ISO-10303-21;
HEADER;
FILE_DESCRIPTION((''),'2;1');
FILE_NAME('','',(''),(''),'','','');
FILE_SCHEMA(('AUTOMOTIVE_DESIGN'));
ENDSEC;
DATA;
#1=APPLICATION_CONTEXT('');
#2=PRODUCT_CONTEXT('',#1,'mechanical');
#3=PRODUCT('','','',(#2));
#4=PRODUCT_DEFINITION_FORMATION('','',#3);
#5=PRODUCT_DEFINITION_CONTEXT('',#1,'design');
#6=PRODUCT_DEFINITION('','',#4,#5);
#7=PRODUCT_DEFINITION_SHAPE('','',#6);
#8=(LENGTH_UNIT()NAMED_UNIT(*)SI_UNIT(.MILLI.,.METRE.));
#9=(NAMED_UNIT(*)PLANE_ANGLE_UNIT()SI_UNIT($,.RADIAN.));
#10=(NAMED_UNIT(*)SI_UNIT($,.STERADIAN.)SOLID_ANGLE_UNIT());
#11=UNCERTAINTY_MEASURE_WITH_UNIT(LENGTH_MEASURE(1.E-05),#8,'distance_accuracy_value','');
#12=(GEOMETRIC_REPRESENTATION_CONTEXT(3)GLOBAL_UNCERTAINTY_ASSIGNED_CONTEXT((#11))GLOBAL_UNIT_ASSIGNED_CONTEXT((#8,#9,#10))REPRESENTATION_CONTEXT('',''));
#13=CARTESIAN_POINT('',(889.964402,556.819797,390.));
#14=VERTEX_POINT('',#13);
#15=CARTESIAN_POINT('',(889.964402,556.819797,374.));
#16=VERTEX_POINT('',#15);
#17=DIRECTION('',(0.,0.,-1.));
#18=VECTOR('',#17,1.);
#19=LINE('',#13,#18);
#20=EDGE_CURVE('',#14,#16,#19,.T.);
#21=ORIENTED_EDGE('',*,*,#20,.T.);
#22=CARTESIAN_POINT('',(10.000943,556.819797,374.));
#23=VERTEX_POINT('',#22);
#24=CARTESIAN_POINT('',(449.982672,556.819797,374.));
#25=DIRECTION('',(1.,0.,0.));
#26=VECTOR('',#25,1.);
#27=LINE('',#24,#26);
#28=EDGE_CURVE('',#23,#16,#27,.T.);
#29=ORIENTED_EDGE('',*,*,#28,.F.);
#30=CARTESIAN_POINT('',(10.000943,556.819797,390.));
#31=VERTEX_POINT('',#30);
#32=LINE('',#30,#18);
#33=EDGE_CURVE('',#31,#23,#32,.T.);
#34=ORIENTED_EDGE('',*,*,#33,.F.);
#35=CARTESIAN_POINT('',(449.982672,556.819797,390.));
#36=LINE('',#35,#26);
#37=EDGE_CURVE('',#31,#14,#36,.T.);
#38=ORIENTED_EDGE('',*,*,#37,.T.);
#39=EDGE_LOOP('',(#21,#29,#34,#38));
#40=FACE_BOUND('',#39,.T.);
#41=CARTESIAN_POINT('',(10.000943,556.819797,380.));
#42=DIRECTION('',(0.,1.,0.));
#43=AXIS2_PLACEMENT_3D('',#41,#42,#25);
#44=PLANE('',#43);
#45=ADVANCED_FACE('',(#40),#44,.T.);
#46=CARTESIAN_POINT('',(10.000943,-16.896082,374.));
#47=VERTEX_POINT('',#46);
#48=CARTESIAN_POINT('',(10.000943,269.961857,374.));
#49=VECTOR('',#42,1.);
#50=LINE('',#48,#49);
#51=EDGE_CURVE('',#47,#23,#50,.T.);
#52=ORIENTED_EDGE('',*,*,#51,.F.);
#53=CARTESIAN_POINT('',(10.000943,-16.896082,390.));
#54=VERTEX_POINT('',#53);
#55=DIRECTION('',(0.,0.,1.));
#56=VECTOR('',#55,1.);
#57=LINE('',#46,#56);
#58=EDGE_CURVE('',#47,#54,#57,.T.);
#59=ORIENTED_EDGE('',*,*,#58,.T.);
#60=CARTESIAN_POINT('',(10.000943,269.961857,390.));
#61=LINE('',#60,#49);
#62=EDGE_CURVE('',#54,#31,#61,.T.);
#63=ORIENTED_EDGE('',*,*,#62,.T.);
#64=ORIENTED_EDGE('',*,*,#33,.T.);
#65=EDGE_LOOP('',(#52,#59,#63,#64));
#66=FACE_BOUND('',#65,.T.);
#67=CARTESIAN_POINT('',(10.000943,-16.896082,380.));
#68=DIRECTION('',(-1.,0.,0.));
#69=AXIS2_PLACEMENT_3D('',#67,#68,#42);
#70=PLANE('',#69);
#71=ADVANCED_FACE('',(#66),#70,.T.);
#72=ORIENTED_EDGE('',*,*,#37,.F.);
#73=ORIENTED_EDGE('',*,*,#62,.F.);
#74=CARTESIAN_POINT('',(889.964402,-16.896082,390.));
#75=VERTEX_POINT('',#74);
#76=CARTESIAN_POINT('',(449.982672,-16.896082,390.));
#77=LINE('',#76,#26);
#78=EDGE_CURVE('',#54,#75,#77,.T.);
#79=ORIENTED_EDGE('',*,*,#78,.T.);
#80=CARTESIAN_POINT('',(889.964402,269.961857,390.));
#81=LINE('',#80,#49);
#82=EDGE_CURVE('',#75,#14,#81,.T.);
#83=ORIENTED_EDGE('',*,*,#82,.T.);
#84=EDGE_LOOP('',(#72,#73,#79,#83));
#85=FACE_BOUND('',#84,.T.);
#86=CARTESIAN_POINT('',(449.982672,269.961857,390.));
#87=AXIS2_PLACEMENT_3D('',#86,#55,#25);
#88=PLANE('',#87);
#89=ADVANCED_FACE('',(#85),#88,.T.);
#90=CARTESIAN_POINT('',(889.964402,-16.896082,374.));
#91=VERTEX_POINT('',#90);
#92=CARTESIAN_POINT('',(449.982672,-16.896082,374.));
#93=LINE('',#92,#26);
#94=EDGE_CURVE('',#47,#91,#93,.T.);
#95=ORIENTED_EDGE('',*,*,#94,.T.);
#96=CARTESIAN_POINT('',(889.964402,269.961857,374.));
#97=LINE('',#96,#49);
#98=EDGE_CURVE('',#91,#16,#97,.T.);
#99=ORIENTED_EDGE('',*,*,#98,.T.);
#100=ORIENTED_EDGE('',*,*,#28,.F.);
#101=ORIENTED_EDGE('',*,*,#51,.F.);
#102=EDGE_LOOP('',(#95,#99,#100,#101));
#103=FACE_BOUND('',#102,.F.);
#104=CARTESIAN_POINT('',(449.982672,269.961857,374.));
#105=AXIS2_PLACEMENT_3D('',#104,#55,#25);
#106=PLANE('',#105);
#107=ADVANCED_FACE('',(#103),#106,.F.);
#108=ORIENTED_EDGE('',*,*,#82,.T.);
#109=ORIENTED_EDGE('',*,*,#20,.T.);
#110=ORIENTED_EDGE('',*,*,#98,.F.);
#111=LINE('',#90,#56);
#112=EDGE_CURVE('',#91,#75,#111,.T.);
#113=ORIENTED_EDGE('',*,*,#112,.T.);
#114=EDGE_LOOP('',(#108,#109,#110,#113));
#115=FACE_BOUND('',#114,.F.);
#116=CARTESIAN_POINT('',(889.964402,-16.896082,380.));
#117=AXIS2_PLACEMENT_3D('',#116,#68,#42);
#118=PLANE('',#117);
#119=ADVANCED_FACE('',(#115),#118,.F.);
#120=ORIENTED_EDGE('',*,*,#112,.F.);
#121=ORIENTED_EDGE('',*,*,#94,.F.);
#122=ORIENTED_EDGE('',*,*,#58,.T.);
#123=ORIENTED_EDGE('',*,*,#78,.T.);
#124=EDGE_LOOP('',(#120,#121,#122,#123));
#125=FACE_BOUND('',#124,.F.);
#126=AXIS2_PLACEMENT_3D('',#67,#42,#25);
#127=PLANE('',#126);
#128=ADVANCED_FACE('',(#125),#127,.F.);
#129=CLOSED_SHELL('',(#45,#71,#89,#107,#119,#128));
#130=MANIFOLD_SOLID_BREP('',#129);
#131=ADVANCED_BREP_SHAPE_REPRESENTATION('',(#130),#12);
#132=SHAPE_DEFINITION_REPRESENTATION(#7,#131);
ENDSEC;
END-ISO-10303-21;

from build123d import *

# Parameters (mm, degrees)
F10_W     = 879.9634585157
F10_H     = 573.7158786505
F11_DEPTH = 6
F12_DEPTH = 10


# Not quite as in the source:
# - a feature of the source that left no trace in its solid (it failed there, or was rolled back) is left out


with BuildPart() as f11:
    # F10 (on face) → F11 (new body)
    with BuildSketch(Plane.XY.offset(380)):
        with Locations((449.9826724641, 269.9618572369)):
            Rectangle(F10_W, F10_H)
    extrude(amount=-F11_DEPTH)

    # F12 (add): a face of the model
    f12_faces = [f11.faces().sort_by_distance(p)[0] for p in [
        (449.9826724641, 269.9618572369, 380),
    ]]
    extrude(f12_faces, amount=F12_DEPTH)


solid = f11.part
